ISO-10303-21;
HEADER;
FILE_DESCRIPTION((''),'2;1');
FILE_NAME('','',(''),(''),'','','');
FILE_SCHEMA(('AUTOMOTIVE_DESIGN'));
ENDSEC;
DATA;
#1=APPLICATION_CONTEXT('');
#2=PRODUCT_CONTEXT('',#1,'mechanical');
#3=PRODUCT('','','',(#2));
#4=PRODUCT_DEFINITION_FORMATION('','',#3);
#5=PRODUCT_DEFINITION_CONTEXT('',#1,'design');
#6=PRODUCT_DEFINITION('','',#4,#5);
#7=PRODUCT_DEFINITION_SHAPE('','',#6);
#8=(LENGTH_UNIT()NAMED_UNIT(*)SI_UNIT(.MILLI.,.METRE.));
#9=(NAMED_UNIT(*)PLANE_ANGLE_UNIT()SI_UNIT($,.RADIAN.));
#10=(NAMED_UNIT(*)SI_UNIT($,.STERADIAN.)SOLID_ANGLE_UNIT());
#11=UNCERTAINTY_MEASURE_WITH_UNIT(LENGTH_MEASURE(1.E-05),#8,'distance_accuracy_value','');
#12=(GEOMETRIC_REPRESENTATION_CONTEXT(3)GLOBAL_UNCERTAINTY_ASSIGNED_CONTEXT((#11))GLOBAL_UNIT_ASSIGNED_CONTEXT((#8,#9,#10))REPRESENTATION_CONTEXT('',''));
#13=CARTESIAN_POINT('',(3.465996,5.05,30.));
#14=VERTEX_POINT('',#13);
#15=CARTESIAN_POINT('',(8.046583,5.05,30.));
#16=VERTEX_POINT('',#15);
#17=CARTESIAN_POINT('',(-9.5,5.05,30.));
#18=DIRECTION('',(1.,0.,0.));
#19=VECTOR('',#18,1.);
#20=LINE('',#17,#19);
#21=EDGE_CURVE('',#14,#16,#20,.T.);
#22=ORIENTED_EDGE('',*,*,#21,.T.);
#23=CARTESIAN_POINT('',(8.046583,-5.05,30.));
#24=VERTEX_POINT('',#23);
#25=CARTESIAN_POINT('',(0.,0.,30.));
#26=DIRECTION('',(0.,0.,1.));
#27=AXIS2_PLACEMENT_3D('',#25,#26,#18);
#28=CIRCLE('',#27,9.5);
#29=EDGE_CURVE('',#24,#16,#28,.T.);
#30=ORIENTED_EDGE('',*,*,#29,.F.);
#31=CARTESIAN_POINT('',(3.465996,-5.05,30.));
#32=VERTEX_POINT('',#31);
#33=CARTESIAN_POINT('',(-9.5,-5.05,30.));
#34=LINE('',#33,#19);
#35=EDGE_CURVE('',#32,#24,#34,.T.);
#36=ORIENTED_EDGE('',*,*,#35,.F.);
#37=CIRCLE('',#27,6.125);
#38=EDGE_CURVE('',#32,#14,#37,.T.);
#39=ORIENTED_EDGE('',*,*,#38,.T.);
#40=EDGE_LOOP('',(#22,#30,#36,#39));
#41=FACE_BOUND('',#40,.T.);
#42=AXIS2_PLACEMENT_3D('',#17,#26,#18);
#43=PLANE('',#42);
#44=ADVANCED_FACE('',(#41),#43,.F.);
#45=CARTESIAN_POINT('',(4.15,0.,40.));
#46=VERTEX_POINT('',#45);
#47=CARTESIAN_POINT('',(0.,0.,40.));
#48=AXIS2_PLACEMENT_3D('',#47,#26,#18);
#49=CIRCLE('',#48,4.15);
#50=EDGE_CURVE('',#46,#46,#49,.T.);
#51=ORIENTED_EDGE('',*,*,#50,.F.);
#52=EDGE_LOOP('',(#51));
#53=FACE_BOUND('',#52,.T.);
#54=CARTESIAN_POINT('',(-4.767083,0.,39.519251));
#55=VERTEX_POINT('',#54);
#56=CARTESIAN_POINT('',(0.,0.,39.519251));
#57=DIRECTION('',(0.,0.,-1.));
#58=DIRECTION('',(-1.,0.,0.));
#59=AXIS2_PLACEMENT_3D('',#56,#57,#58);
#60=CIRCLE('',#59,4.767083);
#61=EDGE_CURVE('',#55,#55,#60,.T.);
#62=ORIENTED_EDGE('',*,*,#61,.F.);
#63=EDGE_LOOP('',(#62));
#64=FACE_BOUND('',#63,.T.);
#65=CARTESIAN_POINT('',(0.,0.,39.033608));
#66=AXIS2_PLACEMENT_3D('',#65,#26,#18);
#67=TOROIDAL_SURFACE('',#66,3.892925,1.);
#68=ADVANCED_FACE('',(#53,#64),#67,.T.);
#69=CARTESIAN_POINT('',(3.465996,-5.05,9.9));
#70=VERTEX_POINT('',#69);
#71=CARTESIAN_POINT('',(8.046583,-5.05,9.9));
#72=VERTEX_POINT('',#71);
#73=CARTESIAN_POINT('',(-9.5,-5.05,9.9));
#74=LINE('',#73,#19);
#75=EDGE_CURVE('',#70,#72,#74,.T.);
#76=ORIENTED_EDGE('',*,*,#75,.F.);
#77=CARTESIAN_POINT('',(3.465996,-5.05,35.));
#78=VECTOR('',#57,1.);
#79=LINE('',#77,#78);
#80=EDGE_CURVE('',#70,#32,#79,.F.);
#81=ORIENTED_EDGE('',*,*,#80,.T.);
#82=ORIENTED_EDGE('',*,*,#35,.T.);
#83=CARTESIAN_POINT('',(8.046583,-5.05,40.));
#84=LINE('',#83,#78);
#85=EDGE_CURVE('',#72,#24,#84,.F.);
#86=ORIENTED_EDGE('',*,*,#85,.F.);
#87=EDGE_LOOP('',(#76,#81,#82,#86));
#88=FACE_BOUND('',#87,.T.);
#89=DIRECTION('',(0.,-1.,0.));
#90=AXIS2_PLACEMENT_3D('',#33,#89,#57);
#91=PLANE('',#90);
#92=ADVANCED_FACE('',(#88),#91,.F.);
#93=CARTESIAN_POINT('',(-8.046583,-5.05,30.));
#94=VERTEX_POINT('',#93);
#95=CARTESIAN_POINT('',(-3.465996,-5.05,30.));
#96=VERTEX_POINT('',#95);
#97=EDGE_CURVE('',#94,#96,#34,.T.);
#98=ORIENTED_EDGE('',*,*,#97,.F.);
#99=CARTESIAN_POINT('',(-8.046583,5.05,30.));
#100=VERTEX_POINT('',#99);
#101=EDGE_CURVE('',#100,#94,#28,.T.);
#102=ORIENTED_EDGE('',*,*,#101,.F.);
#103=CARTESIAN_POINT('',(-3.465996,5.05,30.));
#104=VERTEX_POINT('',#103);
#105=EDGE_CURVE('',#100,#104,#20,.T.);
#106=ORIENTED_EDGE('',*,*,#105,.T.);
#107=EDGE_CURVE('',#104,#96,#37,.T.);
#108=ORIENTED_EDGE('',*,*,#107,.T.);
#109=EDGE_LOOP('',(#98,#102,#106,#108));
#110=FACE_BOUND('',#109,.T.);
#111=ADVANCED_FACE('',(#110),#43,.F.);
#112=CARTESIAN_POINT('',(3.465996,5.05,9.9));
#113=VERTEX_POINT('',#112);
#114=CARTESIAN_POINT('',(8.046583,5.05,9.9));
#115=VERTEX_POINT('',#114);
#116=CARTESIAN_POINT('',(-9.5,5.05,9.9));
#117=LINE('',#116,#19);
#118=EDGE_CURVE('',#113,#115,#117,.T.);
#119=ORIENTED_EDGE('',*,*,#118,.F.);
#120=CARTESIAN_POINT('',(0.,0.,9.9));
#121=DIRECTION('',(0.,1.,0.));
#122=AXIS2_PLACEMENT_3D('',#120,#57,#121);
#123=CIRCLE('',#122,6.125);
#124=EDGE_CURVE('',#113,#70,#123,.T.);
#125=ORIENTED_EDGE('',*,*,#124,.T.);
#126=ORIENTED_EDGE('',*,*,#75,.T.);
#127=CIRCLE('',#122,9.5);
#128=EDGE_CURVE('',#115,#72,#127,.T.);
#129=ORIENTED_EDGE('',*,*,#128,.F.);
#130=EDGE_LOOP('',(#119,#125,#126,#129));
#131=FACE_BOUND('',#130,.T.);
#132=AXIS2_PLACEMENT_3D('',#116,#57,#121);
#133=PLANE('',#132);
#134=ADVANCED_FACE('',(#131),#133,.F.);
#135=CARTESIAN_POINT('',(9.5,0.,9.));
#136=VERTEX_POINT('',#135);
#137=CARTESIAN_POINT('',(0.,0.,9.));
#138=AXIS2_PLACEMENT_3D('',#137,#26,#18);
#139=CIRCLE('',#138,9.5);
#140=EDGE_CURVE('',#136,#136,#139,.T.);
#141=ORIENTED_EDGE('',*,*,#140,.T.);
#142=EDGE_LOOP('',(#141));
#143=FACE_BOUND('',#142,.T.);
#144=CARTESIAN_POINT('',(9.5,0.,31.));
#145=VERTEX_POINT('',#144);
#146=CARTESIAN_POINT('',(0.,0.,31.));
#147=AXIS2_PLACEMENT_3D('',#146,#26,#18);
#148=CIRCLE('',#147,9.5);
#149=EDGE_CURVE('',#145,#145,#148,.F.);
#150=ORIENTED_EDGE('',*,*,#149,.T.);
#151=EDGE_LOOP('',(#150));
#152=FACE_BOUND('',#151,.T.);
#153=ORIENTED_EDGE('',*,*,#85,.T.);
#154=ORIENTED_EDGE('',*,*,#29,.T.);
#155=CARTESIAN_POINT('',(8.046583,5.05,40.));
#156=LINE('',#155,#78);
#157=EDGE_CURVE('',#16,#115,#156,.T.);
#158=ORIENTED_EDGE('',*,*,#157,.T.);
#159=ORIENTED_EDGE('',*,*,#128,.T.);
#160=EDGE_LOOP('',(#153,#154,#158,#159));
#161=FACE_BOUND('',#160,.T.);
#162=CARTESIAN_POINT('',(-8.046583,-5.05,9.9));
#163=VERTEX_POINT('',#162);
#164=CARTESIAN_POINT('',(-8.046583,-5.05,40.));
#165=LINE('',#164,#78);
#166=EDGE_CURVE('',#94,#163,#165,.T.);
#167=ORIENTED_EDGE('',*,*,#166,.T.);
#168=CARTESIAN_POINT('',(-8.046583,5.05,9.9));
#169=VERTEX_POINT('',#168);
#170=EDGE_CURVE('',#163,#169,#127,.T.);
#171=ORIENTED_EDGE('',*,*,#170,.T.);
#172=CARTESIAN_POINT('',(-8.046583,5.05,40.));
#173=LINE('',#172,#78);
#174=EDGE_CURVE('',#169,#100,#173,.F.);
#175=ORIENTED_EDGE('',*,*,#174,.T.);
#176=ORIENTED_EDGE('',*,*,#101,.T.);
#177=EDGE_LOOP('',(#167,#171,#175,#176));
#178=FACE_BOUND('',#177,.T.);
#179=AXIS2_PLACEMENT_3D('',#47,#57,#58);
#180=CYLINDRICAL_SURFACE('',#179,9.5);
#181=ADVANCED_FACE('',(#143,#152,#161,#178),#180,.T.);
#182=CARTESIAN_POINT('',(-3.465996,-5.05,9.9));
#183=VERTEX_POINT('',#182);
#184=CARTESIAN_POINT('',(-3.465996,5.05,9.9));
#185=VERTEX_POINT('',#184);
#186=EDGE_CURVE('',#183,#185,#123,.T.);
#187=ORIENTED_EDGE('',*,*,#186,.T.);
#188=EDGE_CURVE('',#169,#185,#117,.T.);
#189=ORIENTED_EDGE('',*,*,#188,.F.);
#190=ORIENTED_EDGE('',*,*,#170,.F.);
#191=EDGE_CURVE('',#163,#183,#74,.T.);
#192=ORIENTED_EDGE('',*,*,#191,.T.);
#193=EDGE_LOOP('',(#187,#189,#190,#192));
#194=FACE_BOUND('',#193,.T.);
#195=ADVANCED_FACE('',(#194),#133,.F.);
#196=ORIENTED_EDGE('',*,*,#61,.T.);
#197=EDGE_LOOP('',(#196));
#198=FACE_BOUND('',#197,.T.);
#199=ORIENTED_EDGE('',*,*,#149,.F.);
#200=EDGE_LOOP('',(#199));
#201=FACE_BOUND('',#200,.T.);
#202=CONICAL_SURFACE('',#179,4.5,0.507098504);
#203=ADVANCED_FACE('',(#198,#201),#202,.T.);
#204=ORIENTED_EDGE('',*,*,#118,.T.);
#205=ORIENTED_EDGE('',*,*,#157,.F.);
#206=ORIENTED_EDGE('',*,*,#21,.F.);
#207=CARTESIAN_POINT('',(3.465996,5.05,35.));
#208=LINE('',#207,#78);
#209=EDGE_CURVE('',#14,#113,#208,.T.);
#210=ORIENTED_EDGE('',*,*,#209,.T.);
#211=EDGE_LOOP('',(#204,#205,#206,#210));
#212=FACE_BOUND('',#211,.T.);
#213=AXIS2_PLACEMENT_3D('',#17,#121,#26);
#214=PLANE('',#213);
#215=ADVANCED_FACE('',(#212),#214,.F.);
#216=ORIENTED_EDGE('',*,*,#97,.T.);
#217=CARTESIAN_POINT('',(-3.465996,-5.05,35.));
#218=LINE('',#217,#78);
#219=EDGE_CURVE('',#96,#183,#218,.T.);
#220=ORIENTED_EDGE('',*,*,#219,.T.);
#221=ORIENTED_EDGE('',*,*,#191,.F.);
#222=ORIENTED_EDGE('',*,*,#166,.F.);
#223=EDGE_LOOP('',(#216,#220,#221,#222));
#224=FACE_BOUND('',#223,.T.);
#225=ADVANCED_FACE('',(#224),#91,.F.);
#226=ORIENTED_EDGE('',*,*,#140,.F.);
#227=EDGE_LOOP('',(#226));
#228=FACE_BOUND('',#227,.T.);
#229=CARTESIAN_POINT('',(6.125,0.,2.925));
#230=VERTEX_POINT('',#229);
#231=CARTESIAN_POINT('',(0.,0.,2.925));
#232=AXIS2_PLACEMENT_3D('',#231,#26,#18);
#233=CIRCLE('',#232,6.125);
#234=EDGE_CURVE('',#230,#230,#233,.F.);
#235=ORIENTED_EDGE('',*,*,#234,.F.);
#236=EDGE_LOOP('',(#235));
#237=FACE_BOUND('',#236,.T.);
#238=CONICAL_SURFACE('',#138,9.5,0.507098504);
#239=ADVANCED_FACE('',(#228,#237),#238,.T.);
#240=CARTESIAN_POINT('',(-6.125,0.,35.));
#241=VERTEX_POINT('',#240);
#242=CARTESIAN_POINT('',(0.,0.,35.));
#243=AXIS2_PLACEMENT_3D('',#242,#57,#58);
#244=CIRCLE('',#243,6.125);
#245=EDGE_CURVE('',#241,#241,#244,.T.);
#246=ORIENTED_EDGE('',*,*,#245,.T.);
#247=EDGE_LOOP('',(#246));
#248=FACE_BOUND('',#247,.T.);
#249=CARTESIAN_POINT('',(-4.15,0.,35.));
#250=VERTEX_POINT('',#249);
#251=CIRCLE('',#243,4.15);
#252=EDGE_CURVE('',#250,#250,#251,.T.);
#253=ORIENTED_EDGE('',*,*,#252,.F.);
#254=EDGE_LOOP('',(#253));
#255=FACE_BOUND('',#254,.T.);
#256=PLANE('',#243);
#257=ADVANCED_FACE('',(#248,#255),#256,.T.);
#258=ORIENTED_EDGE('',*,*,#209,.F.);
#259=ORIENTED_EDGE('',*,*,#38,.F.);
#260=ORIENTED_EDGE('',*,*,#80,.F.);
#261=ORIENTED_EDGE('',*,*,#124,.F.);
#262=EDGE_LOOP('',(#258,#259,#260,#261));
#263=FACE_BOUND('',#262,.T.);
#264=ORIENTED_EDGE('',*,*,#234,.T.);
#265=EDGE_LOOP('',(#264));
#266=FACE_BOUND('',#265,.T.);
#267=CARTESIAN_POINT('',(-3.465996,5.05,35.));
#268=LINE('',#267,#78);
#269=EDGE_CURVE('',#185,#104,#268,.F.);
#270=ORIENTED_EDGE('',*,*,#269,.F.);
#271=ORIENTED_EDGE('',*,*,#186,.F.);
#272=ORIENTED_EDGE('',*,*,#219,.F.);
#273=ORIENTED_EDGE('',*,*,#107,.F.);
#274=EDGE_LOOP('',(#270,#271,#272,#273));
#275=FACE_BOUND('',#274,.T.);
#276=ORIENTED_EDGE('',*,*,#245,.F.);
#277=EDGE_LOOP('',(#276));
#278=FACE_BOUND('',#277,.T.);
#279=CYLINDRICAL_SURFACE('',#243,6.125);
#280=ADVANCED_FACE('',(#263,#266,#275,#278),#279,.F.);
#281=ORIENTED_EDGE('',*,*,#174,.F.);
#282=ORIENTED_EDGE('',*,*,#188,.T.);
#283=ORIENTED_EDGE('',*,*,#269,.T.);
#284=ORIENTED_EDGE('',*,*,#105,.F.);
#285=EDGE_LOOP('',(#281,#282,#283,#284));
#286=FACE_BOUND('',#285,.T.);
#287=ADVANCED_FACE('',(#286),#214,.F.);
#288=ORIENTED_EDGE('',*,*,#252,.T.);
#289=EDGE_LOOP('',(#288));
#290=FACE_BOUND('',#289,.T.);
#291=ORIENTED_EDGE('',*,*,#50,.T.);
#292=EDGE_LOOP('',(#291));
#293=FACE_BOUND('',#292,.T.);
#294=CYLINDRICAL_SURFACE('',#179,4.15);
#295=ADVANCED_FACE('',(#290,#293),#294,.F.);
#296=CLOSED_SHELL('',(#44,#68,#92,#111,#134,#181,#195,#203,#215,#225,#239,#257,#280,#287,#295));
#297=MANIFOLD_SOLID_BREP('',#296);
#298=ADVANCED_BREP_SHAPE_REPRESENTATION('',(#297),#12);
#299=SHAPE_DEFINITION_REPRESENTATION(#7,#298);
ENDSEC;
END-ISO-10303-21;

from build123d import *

# Parameters (mm, degrees)
SCHIZZO1_R                   = 9.5
SCHIZZO1_R_2                 = 4.15
ESTRUSIONE_ESTRUSIONE1_DEPTH = 40
SCHIZZO2_W                   = 20.1
SCHIZZO2_H                   = 10.1
TAGLIO_ESTRUSIONE1_DEPTH     = 46.290727528
SMUSSO1_SIZE                 = 9
SMUSSO1_SIZE2                = 5
RACCORDO1_R                  = 1
SCHIZZO3_R                   = 6.125
TAGLIO_ESTRUSIONE2_DEPTH     = 35


with BuildPart() as part:
    # Schizzo1 → Estrusione-Estrusione1 (new body)
    with BuildSketch(Plane.XY):
        Circle(SCHIZZO1_R)
        Circle(SCHIZZO1_R_2, mode=Mode.SUBTRACT)
    extrude(amount=ESTRUSIONE_ESTRUSIONE1_DEPTH)

    # Schizzo2 → Taglio-Estrusione1 (cut, through all)
    with BuildSketch(Plane(origin=(9.5, 0, 0), x_dir=(0, 0, -1), z_dir=(1, 0, 0))):
        with Locations((-19.95, 0)):
            Rectangle(SCHIZZO2_W, SCHIZZO2_H)
    extrude(amount=-TAGLIO_ESTRUSIONE1_DEPTH, mode=Mode.SUBTRACT)

    # Smusso1
    smusso1_edges = [part.edges().sort_by_distance(p)[0] for p in [
        (-9.5, 0, 0),
        (-9.5, 0, 40),
    ]]
    smusso1_side = [part.faces().sort_by_distance(p)[0] for p in [
        (-9.5, 0, 20),
    ]]
    chamfer(smusso1_edges, length=SMUSSO1_SIZE, length2=SMUSSO1_SIZE2, reference=smusso1_side[0])

    # Raccordo1
    # the kernel refuses this fillet: 1 mm, written as the material it takes off along each edge
    with BuildSketch(Plane(origin=(0, 0, 40), x_dir=(1, 0, 0), z_dir=(0, -1, 0))) as raccordo1_piece_1:
        with BuildLine():
            CenterArc((3.892925278, -0.966391529), RACCORDO1_R, 29.054604099, 46.048838888)
            Line((4.15, 0), (4.155141494, 0.019327831))
            ThreePointArc((4.155141494, 0.019327831), (4.325, 0.02), (4.5, 0.02))
            Line((4.5, 0.02), (4.517483146, 0.009712859))
            Line((4.517483146, 0.009712859), (4.7845657, -0.471035739))
            Line((4.7845657, -0.471035739), (4.767082554, -0.480748598))
        make_face()
    revolve(axis=Axis((0, 0, 40), (0, 0, 1)), mode=Mode.SUBTRACT)

    # Schizzo3 → Taglio-Estrusione2 (cut)
    with BuildSketch(Plane(origin=(0, 0, 0), x_dir=(-1, 0, 0), z_dir=(0, 0, -1))):
        Circle(SCHIZZO3_R)
    extrude(amount=-TAGLIO_ESTRUSIONE2_DEPTH, mode=Mode.SUBTRACT)


solid = part.part
